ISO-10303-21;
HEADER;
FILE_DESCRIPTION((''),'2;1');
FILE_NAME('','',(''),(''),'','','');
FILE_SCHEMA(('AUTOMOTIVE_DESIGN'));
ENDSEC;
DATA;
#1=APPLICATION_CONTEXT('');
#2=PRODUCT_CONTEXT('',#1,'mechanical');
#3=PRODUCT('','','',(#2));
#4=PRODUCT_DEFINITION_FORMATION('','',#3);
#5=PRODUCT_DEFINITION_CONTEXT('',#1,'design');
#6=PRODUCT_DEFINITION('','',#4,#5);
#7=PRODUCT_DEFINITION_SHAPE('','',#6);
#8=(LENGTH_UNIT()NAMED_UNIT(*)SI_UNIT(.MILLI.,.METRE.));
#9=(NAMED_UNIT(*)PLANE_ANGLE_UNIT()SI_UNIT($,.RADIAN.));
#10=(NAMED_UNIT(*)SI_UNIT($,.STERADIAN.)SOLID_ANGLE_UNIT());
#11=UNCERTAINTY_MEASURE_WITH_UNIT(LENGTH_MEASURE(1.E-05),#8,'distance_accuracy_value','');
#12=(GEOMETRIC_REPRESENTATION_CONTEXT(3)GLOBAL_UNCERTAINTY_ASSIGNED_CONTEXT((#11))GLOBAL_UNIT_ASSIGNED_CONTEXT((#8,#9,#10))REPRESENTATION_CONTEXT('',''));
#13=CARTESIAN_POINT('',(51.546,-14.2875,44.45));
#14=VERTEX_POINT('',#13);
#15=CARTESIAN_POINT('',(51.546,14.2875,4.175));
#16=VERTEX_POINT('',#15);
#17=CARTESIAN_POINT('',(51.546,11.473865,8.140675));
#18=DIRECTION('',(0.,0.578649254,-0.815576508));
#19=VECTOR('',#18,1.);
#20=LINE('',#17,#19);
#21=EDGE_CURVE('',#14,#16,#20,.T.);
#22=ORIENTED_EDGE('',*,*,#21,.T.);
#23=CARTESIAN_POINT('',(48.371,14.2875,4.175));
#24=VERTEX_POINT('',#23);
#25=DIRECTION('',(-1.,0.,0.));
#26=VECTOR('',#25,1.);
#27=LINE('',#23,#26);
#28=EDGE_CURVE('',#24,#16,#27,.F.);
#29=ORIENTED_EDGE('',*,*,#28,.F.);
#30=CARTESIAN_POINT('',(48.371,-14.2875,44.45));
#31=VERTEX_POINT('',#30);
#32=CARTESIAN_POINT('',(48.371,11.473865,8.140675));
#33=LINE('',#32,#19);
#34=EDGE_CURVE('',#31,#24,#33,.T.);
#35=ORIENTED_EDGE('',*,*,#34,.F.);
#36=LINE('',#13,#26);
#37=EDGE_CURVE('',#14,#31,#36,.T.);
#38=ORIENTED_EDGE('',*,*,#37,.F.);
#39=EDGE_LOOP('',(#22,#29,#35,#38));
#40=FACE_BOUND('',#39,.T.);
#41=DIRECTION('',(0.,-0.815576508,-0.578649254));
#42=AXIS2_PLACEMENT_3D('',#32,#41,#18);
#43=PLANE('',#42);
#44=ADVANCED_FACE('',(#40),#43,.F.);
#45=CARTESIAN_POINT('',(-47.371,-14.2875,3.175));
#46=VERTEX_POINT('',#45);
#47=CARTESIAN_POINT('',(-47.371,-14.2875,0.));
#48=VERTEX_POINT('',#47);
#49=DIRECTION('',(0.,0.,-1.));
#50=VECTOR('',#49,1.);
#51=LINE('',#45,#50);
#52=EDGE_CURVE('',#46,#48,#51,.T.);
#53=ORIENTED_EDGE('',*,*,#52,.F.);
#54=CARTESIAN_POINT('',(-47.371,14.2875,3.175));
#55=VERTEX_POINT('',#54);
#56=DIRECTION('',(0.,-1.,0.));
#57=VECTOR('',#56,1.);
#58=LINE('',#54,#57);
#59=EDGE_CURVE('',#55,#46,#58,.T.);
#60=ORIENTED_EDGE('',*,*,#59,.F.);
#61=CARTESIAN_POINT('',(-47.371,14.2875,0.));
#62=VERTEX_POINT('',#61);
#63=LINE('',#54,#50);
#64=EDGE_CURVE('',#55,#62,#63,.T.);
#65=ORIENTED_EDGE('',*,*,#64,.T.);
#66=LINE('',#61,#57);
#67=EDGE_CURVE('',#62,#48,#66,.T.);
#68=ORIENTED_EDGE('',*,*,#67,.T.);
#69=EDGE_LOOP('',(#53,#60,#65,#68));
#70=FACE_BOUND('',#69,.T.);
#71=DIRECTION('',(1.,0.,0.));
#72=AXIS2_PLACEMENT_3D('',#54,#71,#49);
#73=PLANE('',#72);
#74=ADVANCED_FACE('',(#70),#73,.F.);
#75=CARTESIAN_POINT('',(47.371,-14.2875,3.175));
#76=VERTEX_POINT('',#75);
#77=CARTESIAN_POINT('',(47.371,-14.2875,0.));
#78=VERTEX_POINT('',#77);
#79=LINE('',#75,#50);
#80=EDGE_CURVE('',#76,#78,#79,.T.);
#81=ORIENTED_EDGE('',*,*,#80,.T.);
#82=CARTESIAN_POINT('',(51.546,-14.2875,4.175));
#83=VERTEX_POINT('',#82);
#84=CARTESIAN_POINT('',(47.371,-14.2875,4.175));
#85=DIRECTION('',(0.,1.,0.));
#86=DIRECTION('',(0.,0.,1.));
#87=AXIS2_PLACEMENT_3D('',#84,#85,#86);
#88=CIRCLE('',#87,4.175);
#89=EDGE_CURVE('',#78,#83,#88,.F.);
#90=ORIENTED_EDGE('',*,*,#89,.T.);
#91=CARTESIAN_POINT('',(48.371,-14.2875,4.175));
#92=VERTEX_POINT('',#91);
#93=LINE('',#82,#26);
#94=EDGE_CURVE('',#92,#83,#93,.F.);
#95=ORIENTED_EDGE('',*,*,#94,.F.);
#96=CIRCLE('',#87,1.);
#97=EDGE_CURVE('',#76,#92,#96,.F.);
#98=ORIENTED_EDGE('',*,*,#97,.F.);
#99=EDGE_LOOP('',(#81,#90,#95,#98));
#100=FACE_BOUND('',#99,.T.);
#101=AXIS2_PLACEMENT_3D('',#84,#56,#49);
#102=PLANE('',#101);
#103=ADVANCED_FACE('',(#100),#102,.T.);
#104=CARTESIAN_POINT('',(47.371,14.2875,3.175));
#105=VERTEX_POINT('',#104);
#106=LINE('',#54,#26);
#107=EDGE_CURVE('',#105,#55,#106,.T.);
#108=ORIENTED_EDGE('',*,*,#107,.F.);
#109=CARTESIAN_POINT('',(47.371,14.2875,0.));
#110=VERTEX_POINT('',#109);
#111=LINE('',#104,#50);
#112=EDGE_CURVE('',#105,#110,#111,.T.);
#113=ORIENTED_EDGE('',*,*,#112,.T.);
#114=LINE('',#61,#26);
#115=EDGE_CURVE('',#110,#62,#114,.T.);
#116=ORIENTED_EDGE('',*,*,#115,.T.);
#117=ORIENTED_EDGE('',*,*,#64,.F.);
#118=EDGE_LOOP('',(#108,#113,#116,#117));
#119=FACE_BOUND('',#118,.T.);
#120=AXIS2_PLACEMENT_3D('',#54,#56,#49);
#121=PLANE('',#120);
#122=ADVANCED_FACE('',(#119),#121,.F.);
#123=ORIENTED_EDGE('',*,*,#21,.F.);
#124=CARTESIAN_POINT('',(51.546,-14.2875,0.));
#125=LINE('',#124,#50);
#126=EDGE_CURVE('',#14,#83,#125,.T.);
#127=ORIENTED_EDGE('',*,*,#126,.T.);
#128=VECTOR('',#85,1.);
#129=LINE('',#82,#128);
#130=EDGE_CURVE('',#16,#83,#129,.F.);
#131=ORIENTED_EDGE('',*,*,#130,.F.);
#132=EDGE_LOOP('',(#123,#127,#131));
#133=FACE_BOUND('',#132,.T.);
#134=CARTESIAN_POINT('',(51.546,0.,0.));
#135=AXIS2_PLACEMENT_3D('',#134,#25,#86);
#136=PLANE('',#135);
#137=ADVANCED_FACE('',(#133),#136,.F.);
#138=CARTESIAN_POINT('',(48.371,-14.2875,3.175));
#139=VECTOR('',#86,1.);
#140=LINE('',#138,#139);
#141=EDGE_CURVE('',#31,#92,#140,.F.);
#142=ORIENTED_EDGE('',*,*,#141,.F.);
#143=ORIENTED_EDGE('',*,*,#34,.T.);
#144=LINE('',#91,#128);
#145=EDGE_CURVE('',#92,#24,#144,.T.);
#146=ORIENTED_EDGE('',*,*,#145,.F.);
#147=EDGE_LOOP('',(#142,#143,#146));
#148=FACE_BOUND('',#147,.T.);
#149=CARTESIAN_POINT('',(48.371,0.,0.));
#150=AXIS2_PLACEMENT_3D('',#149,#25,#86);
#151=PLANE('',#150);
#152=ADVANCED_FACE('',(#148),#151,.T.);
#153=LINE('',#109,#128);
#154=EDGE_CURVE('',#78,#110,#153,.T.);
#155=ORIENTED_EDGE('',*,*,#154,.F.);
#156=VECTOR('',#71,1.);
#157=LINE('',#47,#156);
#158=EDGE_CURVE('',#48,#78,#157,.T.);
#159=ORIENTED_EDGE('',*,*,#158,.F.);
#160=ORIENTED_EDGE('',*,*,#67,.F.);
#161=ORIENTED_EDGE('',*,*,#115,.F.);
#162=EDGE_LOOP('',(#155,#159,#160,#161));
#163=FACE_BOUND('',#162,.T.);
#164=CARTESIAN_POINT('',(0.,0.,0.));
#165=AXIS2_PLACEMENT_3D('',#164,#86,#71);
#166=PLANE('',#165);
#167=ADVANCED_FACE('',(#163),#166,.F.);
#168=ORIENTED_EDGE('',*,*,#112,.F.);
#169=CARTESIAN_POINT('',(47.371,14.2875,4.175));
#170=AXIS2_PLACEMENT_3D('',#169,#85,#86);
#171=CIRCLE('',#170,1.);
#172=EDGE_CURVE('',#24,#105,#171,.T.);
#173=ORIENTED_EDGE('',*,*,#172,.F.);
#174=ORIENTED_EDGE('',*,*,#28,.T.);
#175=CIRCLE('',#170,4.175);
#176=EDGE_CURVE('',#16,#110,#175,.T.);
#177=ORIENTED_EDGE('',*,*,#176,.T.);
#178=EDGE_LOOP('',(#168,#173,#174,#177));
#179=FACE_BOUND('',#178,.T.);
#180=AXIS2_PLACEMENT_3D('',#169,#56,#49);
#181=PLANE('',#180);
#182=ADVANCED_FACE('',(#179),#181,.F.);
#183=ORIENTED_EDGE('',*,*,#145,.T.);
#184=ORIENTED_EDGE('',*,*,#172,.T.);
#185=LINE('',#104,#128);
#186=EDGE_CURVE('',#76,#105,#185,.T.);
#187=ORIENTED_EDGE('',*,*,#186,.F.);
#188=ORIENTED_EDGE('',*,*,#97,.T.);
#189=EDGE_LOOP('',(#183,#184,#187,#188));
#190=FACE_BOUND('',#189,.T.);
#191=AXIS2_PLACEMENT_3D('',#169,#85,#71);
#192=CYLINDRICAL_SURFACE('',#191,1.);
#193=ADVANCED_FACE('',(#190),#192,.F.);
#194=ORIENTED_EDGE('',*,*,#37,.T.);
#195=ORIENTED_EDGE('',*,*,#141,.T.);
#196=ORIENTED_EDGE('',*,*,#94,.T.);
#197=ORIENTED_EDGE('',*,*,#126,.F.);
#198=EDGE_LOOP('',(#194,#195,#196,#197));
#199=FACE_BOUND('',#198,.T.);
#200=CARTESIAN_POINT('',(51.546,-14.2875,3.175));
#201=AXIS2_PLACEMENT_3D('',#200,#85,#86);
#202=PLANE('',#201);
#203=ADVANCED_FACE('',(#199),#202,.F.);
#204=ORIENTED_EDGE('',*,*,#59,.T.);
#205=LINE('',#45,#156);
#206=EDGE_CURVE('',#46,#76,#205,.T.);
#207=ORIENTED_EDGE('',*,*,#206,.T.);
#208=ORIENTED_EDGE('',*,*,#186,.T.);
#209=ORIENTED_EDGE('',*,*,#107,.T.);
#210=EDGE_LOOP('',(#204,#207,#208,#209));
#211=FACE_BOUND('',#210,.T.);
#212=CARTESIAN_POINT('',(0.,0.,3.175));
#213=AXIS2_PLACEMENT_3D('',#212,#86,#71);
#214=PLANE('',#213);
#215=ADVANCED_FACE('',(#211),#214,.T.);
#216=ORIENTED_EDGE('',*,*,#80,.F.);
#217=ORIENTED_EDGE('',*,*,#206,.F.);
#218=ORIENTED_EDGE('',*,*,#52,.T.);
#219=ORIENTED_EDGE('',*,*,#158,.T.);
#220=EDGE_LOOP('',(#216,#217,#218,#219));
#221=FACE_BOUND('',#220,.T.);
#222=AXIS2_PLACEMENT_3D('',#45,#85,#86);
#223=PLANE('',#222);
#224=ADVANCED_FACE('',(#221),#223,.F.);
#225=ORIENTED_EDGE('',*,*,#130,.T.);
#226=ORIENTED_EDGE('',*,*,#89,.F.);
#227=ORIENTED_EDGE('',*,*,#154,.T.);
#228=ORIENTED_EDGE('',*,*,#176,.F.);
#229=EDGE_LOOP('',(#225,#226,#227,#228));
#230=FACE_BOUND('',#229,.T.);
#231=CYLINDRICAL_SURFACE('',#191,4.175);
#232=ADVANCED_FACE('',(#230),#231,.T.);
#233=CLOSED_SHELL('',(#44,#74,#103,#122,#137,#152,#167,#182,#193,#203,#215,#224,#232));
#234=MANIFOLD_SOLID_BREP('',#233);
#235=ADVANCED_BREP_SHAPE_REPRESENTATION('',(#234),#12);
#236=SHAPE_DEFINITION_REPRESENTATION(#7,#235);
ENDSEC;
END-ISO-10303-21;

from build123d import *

# Parameters (mm, degrees)
SKETCH2_W          = 94.742
SKETCH2_H          = 28.575
BASE_FLANGE1_DEPTH = 3.175
EDGE_FLANGE1_DEPTH = 28.575
CUT_EXTRUDE2_DEPTH = 3.175


# Sheet-metal steps are written as plain solids
with BuildPart() as part:
    # Sketch2 → Base-Flange1 (new body)
    with BuildSketch(Plane.XY):
        Rectangle(SKETCH2_W, SKETCH2_H)
    extrude(amount=BASE_FLANGE1_DEPTH)

    # Edge-Flange1 section (across the edge) → Edge-Flange1 (add)
    with BuildSketch(Plane(origin=(48.371, -14.2875, 3.175), x_dir=(-1, 0, 0), z_dir=(0, 1, 0))):
        with BuildLine():
            Line((-3.175, 1), (-3.175, 41.275))
            Line((-3.175, 41.275), (0, 41.275))
            Line((0, 41.275), (0, 1))
            ThreePointArc((0, 1), (0.292893219, 0.292893219), (1, 0))
            Line((1, 0), (1, -3.175))
            ThreePointArc((1, -3.175), (-1.952170811, -1.952170811), (-3.175, 1))
        make_face()
    extrude(amount=EDGE_FLANGE1_DEPTH)

    # Sketch11 → Cut-Extrude2 (cut)
    with BuildSketch(Plane(origin=(51.546, 0, 0), x_dir=(0, 0, -1), z_dir=(1, 0, 0))):
        Polygon((-44.45, -14.2875), (-4.175, 14.2875), (-44.45, 14.2875), align=None)
    extrude(amount=-CUT_EXTRUDE2_DEPTH, mode=Mode.SUBTRACT)


solid = part.part
